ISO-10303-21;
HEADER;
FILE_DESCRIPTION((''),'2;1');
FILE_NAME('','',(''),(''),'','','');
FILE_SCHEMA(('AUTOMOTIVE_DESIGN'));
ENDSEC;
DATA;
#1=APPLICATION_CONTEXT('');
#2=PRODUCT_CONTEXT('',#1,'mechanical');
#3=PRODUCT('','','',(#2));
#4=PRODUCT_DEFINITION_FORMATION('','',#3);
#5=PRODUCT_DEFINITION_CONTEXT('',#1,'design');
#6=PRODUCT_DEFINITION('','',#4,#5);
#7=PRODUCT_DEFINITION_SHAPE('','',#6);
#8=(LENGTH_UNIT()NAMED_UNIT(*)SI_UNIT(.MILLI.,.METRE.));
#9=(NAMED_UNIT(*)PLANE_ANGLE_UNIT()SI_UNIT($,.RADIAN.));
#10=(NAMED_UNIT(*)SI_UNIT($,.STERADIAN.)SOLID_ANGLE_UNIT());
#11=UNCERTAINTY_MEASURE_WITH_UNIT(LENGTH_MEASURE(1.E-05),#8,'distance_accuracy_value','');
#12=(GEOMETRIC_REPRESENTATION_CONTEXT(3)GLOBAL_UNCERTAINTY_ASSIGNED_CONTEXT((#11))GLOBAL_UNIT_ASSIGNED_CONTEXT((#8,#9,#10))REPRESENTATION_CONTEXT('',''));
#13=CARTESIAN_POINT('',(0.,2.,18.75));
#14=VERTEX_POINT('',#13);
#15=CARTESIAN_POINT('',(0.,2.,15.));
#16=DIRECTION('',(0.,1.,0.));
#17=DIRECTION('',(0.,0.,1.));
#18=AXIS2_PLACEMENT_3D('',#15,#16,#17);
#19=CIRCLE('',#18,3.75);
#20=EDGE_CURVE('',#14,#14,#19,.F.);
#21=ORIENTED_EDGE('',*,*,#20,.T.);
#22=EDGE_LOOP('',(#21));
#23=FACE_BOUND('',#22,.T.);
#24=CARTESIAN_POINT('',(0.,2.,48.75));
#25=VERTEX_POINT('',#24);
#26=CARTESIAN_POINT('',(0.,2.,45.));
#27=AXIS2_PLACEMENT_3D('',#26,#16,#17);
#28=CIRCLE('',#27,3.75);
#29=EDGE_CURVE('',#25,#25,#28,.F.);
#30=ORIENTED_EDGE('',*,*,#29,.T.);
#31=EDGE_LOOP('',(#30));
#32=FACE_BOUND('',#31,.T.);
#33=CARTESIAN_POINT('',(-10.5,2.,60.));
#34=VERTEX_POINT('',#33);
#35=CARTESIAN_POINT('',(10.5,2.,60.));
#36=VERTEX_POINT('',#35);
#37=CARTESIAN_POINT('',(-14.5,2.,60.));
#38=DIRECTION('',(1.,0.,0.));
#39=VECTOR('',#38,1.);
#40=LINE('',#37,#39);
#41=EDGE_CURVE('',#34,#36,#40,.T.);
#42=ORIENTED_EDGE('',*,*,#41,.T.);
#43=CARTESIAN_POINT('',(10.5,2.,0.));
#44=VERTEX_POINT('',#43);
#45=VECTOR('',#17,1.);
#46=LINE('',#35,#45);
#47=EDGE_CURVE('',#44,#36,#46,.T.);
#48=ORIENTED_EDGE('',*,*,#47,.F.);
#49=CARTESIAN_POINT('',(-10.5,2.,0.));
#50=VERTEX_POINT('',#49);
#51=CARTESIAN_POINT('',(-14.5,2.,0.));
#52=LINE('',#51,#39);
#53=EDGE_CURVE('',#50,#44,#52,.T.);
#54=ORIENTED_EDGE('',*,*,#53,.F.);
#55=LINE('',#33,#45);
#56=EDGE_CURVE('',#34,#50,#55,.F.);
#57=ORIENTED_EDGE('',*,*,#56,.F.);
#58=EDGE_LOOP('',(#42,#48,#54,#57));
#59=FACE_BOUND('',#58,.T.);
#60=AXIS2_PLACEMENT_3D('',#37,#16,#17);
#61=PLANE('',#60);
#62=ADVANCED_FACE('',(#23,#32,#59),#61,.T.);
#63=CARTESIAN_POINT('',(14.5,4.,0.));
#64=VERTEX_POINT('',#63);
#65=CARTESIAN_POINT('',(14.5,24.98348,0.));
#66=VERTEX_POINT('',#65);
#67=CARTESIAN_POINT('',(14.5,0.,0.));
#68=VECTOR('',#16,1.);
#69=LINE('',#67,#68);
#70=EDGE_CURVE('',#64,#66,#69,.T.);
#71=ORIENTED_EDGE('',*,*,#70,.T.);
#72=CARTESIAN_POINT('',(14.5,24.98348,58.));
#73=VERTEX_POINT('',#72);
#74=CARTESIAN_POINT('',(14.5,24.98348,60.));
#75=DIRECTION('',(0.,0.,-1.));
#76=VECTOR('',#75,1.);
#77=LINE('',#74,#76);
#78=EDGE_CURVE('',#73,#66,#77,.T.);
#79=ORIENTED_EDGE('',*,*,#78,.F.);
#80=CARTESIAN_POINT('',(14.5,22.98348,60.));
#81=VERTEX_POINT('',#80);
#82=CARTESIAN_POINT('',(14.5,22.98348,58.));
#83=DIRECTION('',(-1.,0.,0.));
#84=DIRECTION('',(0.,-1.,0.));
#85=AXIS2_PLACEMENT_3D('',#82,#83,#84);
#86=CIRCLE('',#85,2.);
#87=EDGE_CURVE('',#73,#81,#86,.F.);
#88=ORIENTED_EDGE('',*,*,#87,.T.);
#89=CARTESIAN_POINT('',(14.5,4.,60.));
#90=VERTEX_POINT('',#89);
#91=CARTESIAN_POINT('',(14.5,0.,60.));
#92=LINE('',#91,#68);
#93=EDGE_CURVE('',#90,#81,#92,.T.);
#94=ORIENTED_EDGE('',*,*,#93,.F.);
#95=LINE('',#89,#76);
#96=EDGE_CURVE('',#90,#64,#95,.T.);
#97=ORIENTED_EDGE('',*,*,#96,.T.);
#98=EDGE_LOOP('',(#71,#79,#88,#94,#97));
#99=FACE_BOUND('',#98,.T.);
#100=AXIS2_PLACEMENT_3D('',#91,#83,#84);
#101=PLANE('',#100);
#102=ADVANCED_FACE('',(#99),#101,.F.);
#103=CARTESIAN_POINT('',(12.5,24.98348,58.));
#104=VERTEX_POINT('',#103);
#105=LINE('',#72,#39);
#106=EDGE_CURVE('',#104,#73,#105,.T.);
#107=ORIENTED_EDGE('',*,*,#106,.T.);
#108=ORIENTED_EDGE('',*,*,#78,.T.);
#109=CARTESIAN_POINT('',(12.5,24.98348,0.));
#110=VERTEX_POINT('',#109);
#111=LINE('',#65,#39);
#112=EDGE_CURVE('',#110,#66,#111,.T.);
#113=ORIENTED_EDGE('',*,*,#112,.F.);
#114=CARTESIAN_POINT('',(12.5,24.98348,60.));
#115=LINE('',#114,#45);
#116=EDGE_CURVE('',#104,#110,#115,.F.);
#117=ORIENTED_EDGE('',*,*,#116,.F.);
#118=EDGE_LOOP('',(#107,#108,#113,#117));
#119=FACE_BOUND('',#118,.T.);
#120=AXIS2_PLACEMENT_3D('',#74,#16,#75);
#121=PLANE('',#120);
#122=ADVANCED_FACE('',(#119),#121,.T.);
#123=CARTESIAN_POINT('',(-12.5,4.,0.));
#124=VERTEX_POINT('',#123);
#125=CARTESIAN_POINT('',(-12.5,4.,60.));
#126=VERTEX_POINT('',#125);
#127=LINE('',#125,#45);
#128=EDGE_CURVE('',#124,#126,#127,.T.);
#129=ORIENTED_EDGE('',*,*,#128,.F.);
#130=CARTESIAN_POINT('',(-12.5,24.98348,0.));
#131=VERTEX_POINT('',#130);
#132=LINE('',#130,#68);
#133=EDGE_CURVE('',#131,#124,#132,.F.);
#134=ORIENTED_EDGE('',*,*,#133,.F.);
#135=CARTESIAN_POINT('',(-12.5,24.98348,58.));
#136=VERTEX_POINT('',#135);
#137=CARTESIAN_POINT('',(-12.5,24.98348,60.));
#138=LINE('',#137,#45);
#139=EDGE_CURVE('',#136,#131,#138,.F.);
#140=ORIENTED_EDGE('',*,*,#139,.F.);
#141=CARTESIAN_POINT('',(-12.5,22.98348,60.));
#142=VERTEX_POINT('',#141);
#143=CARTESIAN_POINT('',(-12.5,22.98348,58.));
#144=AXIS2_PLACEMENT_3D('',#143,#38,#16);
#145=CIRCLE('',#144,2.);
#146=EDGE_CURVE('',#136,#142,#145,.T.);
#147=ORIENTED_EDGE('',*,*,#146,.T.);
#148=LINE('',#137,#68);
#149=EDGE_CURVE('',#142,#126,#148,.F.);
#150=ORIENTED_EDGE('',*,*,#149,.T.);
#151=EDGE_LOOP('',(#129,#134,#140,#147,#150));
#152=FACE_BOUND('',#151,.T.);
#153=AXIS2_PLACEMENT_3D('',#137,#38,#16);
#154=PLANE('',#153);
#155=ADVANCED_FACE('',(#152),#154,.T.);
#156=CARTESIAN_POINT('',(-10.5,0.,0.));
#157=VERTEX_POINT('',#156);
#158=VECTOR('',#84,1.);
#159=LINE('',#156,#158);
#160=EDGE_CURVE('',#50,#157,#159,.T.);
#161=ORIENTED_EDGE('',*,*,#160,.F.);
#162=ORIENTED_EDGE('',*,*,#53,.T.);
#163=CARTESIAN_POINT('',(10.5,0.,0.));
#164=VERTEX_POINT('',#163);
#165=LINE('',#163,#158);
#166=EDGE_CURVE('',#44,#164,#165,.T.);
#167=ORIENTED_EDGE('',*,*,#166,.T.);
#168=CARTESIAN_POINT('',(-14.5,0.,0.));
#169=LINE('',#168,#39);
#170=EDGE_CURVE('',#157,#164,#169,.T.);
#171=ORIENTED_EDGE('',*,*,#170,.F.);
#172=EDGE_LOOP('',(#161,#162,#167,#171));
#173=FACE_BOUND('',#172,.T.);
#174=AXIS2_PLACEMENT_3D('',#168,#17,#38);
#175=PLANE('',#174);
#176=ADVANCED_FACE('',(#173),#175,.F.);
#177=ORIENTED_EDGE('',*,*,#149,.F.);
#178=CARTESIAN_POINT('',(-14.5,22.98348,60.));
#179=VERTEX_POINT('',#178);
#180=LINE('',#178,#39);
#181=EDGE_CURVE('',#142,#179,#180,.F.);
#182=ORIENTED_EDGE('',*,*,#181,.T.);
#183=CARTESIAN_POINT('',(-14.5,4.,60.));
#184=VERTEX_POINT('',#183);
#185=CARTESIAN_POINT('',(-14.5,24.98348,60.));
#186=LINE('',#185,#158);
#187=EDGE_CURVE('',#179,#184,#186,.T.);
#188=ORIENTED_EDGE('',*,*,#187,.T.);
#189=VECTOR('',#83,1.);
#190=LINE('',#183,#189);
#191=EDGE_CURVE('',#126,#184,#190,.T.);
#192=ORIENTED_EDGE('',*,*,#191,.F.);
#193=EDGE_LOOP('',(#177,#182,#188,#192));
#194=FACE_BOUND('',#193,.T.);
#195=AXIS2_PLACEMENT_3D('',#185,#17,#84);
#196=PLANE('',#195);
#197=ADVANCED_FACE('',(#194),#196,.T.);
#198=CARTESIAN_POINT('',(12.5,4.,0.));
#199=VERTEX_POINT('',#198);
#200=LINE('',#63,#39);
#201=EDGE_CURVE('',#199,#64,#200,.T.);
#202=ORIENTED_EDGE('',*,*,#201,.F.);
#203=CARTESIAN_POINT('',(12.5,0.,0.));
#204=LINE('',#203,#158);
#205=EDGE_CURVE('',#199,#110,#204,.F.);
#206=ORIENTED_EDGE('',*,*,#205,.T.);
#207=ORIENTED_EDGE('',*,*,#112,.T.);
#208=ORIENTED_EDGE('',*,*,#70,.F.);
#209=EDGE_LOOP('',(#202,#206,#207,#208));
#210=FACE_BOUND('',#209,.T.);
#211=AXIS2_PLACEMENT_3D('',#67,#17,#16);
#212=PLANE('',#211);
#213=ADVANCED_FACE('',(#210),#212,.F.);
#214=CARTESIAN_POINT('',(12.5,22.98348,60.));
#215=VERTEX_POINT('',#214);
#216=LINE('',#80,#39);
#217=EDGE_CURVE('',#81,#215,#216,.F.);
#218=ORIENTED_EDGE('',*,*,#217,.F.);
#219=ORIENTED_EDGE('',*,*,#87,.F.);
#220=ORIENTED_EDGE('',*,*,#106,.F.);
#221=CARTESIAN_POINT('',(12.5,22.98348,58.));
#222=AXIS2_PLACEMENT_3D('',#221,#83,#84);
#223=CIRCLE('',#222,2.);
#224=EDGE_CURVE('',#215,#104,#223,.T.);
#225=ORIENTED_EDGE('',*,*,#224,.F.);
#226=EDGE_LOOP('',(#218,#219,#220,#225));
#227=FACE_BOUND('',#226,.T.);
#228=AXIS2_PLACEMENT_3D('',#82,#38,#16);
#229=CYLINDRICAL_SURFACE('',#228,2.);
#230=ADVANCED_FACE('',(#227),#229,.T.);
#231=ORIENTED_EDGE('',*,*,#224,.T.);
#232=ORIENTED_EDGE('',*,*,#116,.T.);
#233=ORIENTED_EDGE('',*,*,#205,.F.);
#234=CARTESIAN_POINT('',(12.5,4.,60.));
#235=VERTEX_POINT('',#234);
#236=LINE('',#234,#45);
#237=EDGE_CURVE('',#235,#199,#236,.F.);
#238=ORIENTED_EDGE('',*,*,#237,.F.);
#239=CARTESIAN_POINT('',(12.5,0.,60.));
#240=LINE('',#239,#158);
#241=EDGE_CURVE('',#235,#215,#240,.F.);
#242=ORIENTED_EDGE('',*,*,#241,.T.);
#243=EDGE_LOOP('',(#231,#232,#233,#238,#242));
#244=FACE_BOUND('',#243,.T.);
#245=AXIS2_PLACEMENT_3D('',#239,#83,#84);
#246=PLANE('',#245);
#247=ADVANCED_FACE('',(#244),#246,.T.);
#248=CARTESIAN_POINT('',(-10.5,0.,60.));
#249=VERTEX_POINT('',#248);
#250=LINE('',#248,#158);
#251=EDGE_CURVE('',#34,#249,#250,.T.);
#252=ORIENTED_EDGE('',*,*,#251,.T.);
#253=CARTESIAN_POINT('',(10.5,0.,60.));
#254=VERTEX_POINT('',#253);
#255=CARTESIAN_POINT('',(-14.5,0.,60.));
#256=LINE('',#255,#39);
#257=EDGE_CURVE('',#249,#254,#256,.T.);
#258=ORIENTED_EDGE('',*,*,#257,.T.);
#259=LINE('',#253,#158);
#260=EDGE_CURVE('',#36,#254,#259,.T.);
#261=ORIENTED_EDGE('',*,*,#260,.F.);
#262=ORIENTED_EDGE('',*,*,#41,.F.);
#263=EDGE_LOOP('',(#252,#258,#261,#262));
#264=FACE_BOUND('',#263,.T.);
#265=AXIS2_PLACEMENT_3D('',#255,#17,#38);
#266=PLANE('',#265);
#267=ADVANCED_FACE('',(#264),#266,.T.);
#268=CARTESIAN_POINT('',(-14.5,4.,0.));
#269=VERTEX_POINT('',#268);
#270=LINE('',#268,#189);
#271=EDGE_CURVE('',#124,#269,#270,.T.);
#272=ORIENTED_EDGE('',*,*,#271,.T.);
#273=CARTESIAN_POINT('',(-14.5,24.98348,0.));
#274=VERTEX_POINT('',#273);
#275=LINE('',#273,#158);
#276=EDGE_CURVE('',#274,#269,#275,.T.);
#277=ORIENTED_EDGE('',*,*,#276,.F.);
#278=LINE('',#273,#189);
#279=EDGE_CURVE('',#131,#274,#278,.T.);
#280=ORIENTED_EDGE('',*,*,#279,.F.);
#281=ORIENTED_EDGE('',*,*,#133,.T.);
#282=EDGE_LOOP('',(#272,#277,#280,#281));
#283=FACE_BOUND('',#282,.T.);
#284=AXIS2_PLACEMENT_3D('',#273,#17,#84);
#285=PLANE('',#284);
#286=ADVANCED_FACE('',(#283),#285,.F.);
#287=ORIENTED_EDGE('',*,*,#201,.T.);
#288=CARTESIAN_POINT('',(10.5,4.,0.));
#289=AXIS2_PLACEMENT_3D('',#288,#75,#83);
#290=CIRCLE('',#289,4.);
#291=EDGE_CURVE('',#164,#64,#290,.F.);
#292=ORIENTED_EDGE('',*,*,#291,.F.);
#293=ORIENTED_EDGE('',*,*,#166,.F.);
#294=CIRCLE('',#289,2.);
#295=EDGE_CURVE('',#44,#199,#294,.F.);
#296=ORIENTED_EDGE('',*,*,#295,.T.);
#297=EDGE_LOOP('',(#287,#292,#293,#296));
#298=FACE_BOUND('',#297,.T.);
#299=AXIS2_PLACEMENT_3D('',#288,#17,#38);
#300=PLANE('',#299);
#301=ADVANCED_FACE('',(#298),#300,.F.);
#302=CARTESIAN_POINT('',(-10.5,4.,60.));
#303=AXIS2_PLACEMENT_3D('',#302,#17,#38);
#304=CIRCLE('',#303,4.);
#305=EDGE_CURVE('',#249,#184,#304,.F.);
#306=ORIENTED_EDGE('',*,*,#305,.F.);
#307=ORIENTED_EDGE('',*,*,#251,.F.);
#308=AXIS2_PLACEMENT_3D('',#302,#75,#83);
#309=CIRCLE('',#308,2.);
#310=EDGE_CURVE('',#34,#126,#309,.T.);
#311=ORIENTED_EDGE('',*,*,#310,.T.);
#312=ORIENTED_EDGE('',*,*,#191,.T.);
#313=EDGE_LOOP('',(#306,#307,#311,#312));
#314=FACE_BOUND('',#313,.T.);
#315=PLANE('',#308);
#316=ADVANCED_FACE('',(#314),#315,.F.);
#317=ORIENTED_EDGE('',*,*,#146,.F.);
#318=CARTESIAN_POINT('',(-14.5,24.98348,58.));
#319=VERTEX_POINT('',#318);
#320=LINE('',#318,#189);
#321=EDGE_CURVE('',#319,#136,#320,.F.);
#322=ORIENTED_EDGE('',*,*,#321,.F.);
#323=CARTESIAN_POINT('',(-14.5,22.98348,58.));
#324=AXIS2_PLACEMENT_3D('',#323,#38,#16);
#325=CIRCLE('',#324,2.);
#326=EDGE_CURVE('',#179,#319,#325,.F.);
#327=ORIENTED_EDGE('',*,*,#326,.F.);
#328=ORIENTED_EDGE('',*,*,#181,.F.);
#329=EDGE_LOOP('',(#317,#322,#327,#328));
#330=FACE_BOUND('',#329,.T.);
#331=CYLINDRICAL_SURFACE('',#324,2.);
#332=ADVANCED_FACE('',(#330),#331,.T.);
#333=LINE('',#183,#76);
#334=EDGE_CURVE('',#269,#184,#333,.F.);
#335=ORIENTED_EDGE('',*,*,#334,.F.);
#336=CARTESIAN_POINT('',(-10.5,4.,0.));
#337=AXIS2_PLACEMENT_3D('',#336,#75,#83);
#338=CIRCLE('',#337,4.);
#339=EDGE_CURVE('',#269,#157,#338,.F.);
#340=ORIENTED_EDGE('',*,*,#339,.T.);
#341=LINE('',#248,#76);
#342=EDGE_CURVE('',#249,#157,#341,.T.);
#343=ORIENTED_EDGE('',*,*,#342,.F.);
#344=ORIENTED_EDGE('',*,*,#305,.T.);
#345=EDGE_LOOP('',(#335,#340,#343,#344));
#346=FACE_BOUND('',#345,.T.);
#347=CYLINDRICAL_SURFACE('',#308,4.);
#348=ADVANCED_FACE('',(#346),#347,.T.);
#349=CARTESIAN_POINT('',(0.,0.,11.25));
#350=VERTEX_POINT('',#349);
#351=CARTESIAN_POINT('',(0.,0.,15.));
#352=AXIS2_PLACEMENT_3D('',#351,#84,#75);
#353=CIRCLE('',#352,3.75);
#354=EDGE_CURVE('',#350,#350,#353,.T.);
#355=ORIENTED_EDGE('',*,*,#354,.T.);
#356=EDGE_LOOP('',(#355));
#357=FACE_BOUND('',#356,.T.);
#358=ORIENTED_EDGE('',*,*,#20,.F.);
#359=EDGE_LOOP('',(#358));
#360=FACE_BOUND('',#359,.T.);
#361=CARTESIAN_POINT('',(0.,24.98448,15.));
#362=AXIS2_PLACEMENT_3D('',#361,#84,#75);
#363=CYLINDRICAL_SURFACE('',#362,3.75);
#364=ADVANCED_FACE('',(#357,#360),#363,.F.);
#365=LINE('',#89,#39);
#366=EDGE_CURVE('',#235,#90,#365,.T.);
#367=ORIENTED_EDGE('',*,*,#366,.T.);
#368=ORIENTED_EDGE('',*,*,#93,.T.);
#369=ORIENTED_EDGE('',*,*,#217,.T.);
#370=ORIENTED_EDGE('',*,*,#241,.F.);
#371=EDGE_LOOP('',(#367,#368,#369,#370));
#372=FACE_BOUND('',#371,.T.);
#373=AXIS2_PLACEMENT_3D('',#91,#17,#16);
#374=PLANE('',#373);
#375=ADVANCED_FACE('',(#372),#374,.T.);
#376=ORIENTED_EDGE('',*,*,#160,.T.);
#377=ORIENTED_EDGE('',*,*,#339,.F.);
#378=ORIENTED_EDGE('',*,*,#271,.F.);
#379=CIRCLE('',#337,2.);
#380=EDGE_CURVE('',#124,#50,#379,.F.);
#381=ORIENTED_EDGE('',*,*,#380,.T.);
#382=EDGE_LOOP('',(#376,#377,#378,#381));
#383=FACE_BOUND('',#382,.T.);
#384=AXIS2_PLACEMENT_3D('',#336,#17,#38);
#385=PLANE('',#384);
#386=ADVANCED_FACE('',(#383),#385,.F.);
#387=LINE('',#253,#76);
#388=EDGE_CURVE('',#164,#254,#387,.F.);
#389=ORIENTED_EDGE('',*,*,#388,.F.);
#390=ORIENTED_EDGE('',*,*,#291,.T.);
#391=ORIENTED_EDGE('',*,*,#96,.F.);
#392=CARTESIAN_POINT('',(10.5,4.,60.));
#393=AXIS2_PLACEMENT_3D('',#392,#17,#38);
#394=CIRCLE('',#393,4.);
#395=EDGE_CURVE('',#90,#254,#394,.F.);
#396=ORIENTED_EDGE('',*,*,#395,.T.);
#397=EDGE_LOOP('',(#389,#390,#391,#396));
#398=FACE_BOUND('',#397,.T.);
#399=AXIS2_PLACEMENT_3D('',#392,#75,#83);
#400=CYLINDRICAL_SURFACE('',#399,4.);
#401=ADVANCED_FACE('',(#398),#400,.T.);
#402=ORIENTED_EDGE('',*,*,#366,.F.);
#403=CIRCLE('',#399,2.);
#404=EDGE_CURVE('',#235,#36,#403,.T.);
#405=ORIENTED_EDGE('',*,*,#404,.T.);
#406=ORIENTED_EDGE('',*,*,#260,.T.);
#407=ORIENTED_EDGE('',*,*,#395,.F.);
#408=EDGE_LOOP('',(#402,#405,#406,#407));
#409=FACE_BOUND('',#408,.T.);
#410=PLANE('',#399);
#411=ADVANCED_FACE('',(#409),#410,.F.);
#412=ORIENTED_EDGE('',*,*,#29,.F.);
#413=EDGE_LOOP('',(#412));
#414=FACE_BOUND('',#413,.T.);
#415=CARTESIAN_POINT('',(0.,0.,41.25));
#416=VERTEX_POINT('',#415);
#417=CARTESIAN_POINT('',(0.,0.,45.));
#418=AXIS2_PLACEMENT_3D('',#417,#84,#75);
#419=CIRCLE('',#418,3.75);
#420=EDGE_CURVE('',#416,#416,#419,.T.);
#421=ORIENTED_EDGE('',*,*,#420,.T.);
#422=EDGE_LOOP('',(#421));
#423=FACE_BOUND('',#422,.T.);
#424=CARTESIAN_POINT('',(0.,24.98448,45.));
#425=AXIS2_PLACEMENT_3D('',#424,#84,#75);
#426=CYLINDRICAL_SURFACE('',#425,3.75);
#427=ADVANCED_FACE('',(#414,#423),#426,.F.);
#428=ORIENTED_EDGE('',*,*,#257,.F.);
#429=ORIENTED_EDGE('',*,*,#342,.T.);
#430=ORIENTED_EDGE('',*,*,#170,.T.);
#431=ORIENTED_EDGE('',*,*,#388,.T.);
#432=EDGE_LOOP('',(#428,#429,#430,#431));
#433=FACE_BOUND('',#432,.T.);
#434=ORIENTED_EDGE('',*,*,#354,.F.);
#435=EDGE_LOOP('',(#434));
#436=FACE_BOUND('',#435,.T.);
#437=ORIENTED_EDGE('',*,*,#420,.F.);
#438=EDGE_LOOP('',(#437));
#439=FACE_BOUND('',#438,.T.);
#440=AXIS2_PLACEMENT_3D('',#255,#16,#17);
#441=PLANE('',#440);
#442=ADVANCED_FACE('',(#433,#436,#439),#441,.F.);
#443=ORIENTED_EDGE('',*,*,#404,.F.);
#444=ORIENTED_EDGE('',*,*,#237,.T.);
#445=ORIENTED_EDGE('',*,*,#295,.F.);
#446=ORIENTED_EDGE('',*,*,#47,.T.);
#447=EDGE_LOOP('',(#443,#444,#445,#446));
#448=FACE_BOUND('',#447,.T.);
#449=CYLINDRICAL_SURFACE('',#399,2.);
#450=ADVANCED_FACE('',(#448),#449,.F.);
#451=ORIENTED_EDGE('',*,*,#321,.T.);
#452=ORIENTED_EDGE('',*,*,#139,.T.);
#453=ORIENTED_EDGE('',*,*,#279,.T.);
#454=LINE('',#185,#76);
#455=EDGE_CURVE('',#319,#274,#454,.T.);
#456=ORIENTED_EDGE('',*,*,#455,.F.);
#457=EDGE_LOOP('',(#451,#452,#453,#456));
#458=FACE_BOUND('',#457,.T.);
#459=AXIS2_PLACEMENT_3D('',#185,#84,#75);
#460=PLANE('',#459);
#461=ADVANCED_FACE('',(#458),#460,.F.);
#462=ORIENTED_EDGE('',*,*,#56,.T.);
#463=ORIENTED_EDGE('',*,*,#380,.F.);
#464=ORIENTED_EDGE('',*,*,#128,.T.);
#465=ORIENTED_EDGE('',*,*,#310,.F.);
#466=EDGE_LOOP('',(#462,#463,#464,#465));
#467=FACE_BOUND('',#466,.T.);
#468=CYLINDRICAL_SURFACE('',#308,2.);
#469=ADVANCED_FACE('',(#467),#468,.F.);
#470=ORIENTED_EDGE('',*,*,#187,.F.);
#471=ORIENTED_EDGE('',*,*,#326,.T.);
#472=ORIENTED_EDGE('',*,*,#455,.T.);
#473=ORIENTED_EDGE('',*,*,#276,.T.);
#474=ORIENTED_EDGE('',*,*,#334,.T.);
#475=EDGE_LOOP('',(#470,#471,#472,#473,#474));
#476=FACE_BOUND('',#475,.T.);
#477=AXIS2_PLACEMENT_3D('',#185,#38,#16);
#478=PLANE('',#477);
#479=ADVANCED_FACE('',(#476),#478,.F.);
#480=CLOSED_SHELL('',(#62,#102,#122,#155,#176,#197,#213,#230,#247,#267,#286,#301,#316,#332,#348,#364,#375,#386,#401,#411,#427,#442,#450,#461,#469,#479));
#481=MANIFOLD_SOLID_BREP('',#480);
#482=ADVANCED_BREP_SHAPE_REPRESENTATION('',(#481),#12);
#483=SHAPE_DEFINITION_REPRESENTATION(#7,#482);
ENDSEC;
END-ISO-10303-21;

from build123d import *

# Parameters (mm, degrees)
EXTRUDE_1_DEPTH       = 60
SHEET_METAL_1_DEPTH   = 60
SHEET_METAL_1_2_DEPTH = 60
CUT_EXTRUDE_1_REACH   = 68.591
SKETCH_2_R            = 3.75
FILLET_1_R            = 2


# Read off the part's stored shape, not the designer's step: Преобразовать-Твердое тело1
with BuildPart() as part:
    # Sketch 1 → Бобышка-Вытянуть1 (new body)
    with BuildSketch(Plane.XY):
        Polygon((-12.5, 2), (12.5, 2), (12.5, 24.983479724), (14.5, 24.983479724), (14.5, 0), (-14.5, 0), (-14.5, 24.983479724), (-12.5, 24.983479724), align=None)
    extrude(amount=EXTRUDE_1_DEPTH)

    # Sheet Metal 1 outline → Sheet Metal 1 (cut)
    with BuildSketch(Plane.XY):
        with BuildLine():
            Line((-14.5, 0), (-10.5, 0))
            ThreePointArc((-10.5, 0), (-13.328427125, 1.171572875), (-14.5, 4))
            Line((-14.5, 4), (-14.5, 0))
        make_face()
        with BuildLine():
            ThreePointArc((14.5, 4), (13.328427125, 1.171572875), (10.5, 0))
            Line((10.5, 0), (14.5, 0))
            Line((14.5, 0), (14.5, 4))
        make_face()
    extrude(amount=SHEET_METAL_1_DEPTH, mode=Mode.SUBTRACT)

    # Sheet Metal 1 2 outline → Sheet Metal 1 2 (add)
    with BuildSketch(Plane.XY):
        with BuildLine():
            Line((-12.5, 2), (-10.5, 2))
            ThreePointArc((-10.5, 2), (-11.914213562, 2.585786438), (-12.5, 4))
            Line((-12.5, 4), (-12.5, 2))
        make_face()
        with BuildLine():
            ThreePointArc((12.5, 4), (11.914213562, 2.585786438), (10.5, 2))
            Line((10.5, 2), (12.5, 2))
            Line((12.5, 2), (12.5, 4))
        make_face()
    extrude(amount=SHEET_METAL_1_2_DEPTH)

    # Sketch 2 → Вырез-Вытянуть1 (cut, up to next)
    with BuildSketch(Plane.XZ, mode=Mode.PRIVATE) as cut_extrude_1_sk1:
        with Locations(Location((0, 45, 0), (0, 0, 270))):
            Circle(SKETCH_2_R)
    cut_extrude_1_tool1 = extrude(cut_extrude_1_sk1.sketch, amount=-CUT_EXTRUDE_1_REACH, mode=Mode.PRIVATE) & part.part
    # Sketch 2 → Вырез-Вытянуть1 (cut, up to next)
    with BuildSketch(Plane.XZ, mode=Mode.PRIVATE) as cut_extrude_1_sk2:
        with Locations(Location((0, 15, 0), (0, 0, 270))):
            Circle(SKETCH_2_R)
    cut_extrude_1_tool2 = extrude(cut_extrude_1_sk2.sketch, amount=-CUT_EXTRUDE_1_REACH, mode=Mode.PRIVATE) & part.part
    add(cut_extrude_1_tool1.solids().sort_by_distance((0, 0, 45))[0], mode=Mode.SUBTRACT)
    add(cut_extrude_1_tool2.solids().sort_by_distance((0, 0, 15))[0], mode=Mode.SUBTRACT)

    # Скругление1
    fillet_1_edges = [part.edges().sort_by_distance(p)[0] for p in [
        (13.5, 24.983479724, 60),
        (-13.5, 24.983479724, 60),
    ]]
    fillet(fillet_1_edges, radius=FILLET_1_R)


solid = part.part
